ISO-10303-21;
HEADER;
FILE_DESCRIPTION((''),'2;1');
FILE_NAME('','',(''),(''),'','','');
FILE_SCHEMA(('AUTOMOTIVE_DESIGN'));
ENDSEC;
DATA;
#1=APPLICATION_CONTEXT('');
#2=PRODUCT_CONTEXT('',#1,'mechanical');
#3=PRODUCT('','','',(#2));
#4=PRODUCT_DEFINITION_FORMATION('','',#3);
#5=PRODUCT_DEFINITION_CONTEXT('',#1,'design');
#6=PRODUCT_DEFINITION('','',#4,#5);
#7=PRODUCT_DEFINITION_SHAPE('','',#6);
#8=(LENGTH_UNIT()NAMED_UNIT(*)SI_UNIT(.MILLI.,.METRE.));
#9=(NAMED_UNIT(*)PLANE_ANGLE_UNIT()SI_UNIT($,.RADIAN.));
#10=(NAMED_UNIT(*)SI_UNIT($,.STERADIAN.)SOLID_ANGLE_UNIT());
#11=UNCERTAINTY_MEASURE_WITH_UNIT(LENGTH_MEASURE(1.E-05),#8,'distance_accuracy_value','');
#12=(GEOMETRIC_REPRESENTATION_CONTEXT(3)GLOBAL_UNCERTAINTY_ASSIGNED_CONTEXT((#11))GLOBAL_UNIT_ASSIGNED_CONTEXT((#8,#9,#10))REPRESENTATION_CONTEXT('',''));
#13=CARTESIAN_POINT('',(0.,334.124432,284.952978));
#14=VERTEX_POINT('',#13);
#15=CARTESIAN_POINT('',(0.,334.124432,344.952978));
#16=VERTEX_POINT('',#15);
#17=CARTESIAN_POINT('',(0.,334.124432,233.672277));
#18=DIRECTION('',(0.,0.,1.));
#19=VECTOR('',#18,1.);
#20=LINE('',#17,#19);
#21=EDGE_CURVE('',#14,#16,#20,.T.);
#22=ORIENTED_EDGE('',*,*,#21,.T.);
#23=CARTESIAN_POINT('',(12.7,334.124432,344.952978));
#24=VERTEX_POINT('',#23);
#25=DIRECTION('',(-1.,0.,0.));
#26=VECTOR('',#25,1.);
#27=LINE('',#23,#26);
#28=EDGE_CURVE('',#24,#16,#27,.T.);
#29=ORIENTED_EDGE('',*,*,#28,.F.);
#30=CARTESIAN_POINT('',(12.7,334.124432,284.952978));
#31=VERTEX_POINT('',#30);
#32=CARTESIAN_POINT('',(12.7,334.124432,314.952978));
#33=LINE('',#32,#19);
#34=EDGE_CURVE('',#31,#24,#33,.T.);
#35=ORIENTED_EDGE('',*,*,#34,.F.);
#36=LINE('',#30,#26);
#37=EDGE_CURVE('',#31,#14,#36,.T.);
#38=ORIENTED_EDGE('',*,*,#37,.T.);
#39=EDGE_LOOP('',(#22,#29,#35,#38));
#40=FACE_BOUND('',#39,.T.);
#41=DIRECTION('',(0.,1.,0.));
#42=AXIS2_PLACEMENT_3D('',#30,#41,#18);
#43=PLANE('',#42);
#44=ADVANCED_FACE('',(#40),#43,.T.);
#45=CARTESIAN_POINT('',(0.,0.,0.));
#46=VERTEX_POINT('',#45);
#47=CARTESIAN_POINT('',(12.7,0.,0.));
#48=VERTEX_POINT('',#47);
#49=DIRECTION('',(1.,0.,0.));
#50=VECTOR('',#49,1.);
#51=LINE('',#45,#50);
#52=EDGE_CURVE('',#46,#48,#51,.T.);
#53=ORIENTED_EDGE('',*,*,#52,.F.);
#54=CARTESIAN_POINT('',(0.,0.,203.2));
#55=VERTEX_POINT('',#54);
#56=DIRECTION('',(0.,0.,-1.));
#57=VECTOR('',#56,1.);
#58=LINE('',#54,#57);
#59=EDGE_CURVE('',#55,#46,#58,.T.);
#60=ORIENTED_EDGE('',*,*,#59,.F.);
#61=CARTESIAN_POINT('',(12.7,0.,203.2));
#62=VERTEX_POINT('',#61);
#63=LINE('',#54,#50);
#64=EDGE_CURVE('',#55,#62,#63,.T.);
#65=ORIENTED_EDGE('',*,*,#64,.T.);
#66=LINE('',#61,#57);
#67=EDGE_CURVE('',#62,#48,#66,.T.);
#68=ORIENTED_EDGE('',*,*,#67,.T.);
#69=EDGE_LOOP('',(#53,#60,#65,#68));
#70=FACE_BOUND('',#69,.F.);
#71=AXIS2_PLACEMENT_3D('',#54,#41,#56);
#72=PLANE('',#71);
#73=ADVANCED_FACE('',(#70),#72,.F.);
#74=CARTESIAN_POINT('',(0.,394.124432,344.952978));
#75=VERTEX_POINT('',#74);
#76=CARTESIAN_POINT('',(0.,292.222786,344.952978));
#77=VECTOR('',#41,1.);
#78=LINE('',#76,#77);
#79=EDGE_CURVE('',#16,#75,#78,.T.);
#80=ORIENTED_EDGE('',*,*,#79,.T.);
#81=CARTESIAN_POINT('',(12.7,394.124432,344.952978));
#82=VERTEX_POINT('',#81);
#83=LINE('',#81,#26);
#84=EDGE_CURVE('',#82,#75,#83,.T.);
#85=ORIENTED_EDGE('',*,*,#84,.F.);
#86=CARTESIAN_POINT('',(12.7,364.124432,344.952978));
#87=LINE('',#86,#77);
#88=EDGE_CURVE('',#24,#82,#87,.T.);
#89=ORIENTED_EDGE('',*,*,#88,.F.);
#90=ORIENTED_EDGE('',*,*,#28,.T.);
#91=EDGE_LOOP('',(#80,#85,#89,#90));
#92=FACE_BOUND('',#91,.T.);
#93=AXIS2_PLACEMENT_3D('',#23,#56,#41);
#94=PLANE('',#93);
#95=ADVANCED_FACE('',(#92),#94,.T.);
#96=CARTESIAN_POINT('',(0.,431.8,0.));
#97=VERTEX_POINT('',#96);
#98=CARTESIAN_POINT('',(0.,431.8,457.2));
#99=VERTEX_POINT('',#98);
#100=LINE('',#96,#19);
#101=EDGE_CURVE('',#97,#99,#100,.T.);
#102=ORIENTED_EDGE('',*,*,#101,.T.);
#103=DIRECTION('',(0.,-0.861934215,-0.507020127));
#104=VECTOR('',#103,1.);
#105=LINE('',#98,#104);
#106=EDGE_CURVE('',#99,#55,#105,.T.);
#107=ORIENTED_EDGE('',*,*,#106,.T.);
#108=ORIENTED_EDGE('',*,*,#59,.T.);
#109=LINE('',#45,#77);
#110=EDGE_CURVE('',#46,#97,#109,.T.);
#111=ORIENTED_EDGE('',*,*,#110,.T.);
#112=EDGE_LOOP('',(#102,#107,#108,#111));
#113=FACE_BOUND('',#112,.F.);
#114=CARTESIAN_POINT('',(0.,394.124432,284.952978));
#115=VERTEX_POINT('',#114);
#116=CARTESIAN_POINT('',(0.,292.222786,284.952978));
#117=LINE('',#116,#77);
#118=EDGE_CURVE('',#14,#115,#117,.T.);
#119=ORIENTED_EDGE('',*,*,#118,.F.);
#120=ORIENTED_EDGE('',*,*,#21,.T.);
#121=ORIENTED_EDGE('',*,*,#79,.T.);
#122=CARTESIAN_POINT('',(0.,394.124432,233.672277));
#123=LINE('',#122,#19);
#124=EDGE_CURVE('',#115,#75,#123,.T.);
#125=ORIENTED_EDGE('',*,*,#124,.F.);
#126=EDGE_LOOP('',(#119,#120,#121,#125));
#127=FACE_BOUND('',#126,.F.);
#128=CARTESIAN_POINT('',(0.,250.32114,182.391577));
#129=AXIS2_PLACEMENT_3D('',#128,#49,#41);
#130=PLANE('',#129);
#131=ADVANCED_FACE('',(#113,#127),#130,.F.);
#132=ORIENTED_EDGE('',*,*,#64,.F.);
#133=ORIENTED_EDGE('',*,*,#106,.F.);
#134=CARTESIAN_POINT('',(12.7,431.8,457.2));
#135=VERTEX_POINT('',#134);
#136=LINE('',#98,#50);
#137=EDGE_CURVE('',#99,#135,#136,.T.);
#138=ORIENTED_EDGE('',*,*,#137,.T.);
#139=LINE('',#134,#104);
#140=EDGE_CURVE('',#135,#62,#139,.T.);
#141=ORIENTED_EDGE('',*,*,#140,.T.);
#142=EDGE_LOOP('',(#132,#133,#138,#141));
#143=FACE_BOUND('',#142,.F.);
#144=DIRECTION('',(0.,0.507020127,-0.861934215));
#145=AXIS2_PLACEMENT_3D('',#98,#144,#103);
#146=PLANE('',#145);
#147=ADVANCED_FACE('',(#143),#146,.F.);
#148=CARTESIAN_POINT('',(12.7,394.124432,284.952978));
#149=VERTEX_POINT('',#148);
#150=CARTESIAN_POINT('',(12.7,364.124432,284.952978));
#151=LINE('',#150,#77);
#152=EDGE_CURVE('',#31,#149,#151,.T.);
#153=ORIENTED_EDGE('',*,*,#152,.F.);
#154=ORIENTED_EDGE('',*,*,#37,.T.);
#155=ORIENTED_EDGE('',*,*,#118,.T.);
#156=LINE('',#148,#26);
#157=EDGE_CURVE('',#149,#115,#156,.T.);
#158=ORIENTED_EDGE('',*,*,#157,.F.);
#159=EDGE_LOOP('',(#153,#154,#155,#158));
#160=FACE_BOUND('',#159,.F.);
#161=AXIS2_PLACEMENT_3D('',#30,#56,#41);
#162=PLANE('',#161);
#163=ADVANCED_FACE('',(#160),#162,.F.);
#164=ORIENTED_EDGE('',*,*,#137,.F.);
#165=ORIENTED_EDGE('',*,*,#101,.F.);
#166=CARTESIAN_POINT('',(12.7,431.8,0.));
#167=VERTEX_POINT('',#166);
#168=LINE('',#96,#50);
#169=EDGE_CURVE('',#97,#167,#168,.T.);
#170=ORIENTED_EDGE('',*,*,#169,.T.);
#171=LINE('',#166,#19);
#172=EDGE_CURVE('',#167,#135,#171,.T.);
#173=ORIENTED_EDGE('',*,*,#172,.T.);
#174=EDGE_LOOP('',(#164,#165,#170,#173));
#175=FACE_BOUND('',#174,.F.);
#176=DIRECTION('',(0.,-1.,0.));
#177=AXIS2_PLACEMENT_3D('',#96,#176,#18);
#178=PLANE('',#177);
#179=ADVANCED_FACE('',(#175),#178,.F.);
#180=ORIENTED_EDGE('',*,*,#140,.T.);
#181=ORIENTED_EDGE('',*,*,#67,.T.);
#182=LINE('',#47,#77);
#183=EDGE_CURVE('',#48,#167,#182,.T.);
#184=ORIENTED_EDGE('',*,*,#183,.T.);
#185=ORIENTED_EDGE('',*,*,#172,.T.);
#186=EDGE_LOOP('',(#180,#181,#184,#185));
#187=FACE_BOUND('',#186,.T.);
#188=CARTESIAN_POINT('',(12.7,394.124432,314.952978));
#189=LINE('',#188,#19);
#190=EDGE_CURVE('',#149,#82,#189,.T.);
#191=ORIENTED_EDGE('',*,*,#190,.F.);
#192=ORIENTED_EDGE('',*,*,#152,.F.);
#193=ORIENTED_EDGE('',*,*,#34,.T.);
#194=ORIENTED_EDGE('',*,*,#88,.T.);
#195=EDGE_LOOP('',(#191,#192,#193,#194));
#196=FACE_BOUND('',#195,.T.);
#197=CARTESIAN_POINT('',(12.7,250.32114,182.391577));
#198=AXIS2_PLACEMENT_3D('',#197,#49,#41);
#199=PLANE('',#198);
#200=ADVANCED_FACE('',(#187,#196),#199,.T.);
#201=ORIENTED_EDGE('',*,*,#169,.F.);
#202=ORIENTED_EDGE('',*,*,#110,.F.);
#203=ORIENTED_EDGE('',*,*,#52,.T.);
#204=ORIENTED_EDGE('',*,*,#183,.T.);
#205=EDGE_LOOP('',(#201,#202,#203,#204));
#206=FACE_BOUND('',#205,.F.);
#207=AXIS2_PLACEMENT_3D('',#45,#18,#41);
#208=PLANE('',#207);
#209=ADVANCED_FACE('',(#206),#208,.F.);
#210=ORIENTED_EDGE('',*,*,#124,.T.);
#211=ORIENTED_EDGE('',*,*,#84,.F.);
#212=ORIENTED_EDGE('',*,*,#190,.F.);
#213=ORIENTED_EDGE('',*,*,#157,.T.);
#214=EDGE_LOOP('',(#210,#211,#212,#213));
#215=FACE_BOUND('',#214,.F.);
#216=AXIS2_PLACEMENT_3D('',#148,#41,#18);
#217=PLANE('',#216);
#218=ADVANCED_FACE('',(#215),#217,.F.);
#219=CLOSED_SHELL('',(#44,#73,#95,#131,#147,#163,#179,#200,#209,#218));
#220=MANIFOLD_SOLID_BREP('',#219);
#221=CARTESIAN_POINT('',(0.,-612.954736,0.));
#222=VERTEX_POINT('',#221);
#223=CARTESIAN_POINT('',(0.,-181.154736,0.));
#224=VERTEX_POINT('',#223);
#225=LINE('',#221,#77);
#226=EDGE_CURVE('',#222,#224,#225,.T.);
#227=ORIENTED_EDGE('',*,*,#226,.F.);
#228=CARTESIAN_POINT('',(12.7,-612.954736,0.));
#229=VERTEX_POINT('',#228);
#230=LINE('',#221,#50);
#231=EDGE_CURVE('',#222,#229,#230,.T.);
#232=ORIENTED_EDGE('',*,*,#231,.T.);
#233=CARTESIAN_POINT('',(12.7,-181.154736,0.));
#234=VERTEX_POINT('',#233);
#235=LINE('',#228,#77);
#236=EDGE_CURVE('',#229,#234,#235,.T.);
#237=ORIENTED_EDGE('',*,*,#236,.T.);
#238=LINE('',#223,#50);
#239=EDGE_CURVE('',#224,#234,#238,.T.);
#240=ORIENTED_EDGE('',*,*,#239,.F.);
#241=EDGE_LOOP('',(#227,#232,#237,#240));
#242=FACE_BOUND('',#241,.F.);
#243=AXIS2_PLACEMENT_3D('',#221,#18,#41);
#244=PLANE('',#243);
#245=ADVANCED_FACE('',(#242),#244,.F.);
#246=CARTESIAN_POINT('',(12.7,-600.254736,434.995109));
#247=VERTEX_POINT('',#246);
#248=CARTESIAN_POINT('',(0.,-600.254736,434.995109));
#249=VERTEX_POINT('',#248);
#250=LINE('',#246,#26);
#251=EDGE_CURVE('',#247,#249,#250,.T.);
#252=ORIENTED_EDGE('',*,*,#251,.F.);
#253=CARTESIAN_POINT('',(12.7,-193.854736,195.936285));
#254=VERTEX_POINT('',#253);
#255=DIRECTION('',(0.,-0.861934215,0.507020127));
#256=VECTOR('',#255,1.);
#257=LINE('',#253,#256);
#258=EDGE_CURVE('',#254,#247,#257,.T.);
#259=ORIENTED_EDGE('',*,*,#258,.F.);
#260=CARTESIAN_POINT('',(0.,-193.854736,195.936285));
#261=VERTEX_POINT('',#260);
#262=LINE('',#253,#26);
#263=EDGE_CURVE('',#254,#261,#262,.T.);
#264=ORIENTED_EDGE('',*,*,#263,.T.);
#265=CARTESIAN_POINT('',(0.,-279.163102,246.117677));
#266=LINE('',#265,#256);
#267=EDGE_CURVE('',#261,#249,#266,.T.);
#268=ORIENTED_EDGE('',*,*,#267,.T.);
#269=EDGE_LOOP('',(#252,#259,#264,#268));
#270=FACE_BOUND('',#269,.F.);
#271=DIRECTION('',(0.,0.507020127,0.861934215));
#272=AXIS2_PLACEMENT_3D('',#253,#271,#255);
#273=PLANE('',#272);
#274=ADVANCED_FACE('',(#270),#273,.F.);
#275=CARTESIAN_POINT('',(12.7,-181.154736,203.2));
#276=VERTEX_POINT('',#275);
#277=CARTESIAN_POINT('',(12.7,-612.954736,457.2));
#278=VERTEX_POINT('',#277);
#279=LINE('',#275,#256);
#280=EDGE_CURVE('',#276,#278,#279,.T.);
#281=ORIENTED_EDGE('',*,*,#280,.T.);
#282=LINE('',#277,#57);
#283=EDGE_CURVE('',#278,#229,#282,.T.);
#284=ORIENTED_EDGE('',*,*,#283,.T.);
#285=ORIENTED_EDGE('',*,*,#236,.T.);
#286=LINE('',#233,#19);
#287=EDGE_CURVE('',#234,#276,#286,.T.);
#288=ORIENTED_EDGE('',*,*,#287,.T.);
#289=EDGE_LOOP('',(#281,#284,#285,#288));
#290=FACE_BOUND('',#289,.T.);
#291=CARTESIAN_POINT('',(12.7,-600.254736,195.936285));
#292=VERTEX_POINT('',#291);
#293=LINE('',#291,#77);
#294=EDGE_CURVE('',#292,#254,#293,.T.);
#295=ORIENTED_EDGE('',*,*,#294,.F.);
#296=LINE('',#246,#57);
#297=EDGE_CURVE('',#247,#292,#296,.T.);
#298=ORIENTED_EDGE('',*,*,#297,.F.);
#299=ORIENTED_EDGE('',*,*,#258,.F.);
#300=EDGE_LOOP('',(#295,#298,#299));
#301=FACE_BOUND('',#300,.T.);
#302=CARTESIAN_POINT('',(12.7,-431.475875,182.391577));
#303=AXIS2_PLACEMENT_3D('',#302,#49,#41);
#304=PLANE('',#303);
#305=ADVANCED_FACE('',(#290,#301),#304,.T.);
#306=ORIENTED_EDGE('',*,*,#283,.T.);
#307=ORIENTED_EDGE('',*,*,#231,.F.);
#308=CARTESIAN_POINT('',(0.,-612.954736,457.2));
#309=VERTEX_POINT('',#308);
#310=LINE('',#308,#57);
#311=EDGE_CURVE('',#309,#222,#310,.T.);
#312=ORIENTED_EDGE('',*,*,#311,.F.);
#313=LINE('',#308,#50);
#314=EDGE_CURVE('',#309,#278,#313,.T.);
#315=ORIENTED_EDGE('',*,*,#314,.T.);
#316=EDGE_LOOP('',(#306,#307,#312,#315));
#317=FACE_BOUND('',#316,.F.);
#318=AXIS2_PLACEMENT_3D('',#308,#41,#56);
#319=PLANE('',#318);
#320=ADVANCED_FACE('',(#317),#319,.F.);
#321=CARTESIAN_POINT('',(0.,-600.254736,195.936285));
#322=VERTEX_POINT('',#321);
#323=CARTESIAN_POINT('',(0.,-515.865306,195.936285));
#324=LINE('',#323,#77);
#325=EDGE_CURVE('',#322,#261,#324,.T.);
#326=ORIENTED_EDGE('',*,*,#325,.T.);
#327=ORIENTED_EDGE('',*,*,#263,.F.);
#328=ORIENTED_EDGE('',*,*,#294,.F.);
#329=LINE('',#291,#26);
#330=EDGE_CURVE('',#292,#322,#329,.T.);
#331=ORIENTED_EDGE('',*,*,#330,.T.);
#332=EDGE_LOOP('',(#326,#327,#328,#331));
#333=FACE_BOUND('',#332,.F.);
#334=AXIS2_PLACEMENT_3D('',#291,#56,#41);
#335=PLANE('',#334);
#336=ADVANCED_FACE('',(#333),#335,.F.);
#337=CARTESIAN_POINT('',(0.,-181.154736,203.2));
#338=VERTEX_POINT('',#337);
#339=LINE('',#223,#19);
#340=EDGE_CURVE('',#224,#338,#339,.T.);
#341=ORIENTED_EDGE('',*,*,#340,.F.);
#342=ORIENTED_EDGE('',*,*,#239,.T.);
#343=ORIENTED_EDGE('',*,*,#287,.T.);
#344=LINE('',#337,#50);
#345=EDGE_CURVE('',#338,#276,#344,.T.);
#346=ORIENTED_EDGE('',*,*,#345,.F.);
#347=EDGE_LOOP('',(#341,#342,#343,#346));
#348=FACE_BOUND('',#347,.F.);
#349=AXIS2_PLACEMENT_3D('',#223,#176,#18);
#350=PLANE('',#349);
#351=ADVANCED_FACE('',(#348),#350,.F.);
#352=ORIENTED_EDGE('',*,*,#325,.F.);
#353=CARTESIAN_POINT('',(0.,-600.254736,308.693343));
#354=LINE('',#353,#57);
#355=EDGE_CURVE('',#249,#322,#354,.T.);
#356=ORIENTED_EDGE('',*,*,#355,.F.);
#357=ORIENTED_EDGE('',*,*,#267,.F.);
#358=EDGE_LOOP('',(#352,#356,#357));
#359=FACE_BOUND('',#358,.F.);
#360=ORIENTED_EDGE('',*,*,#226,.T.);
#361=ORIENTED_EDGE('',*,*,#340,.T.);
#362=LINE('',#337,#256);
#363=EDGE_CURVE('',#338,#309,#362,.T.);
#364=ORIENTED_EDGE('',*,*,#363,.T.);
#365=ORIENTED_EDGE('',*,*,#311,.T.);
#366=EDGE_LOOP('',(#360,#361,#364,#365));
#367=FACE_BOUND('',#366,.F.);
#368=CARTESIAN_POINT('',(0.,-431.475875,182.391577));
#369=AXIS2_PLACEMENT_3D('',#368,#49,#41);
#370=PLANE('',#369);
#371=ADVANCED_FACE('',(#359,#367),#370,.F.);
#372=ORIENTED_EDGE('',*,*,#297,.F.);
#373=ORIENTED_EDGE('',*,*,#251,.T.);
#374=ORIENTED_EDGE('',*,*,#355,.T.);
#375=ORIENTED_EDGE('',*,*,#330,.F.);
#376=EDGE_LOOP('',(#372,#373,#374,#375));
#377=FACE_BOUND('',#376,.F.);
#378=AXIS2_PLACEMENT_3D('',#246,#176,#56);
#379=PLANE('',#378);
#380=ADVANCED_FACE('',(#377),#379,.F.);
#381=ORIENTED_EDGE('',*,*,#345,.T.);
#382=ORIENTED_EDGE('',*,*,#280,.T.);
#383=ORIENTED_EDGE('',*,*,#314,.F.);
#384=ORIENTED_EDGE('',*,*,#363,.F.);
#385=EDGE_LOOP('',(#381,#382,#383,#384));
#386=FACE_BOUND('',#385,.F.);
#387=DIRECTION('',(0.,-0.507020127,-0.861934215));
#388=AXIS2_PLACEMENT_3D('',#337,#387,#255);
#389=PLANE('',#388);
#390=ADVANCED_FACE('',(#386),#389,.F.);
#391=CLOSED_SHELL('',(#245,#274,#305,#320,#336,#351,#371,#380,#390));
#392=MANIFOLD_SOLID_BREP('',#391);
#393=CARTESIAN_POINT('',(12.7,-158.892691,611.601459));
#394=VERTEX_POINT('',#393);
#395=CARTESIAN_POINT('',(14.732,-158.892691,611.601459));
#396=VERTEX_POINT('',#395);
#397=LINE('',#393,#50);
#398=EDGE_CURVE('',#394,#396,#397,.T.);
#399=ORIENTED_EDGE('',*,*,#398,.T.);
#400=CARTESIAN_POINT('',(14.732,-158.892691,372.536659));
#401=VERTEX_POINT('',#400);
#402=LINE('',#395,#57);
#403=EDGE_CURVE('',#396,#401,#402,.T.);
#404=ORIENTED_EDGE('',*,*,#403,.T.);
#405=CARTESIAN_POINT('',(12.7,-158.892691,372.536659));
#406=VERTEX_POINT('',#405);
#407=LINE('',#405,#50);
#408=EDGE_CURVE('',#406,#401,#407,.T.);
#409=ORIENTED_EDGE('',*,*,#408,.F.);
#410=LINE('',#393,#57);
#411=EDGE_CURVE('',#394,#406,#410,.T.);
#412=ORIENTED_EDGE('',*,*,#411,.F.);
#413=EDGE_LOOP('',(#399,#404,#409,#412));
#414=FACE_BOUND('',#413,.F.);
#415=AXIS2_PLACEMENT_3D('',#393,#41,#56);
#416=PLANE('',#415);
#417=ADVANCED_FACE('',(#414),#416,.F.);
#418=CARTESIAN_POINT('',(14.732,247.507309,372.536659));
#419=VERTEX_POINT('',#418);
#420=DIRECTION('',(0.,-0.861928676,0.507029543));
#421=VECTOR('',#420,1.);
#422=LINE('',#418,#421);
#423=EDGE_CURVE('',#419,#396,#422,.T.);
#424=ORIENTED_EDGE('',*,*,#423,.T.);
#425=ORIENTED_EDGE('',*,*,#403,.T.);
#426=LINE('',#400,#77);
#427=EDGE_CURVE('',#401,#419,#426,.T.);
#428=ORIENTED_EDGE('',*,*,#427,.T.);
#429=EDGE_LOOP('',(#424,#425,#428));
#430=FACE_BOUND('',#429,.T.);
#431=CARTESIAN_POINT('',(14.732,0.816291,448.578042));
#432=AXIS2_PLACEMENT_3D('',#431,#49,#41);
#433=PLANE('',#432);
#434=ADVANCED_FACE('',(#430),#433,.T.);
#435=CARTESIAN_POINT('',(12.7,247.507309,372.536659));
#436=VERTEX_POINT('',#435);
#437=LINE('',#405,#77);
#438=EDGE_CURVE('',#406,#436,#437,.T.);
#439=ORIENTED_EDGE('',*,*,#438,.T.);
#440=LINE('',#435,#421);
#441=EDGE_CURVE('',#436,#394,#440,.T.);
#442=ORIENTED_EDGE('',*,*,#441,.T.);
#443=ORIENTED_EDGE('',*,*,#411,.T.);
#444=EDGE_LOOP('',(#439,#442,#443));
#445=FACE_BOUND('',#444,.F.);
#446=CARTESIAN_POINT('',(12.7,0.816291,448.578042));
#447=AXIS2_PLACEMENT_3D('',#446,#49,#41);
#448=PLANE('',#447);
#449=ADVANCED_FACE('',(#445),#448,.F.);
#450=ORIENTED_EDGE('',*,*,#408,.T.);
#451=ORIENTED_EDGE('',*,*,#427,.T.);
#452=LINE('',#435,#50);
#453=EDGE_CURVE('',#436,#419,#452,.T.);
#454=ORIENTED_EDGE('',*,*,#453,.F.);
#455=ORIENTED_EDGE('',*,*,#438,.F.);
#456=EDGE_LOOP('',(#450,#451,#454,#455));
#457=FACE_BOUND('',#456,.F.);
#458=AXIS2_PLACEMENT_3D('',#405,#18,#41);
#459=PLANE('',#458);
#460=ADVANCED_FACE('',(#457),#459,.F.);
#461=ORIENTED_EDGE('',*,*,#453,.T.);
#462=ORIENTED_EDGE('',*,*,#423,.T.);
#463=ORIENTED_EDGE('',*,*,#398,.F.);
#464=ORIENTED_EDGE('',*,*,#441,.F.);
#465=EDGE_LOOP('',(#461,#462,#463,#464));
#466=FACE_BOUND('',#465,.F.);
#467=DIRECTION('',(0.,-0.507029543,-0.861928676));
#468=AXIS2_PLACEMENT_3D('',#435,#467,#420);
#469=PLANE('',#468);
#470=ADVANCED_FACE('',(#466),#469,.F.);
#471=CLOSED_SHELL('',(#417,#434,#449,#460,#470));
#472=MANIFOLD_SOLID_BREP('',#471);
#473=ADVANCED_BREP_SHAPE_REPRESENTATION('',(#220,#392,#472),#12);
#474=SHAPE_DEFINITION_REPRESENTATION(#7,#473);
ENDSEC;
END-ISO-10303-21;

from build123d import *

# Parameters (mm, degrees)
F1_DEPTH = 12.7
F2_DEPTH = 12.7
F3_W     = 60
F3_H     = 60
F4_DEPTH = 25.4
F6_DEPTH = 2.032
F7_DEPTH = 25.4


# Not quite as in the source:
# - a length typed as a fraction of an inch, garbled in the dataset ("3 / 203.2 mm" for 3/8 in), is restored


with BuildPart() as f1:
    # F0 (on Right) → F1 (new body)
    with BuildSketch(Plane.YZ):
        Polygon((-612.9547357559, 0), (-181.1547357559, 0), (-181.1547357559, 203.2), (-612.9547357559, 457.2), align=None)
    extrude(amount=F1_DEPTH)

    # F5 (on face) → F7 (cut)
    with BuildSketch(Plane.YZ.offset(12.7)):
        Polygon((-193.8547357559, 195.9362851102), (-600.2547357559, 434.9951086396), (-600.2547357559, 195.9362851102), align=None)
    extrude(amount=-F7_DEPTH, mode=Mode.SUBTRACT)


with BuildPart() as f2:
    # F0 (on Right) → F2 (new body)
    with BuildSketch(Plane.YZ):
        Polygon((0, 203.2), (0, 0), (431.8, 0), (431.8, 457.2), align=None)
    extrude(amount=F2_DEPTH)

    # F3 (on face) → F4 (cut)
    with BuildSketch(Plane.YZ.offset(12.7)):
        with Locations((364.1244322062, 314.9529779075)):
            Rectangle(F3_W, F3_H)
    extrude(amount=-F4_DEPTH, mode=Mode.SUBTRACT)


with BuildPart() as f6:
    # F5 (on face) → F6 (new body)
    with BuildSketch(Plane.YZ.offset(12.7)):
        Polygon((247.5073088646, 372.5366592407), (-158.8926911354, 611.6014592407), (-158.8926911354, 372.5366592407), align=None)
    extrude(amount=F6_DEPTH)


solid = Compound([f1.part, f2.part, f6.part])
